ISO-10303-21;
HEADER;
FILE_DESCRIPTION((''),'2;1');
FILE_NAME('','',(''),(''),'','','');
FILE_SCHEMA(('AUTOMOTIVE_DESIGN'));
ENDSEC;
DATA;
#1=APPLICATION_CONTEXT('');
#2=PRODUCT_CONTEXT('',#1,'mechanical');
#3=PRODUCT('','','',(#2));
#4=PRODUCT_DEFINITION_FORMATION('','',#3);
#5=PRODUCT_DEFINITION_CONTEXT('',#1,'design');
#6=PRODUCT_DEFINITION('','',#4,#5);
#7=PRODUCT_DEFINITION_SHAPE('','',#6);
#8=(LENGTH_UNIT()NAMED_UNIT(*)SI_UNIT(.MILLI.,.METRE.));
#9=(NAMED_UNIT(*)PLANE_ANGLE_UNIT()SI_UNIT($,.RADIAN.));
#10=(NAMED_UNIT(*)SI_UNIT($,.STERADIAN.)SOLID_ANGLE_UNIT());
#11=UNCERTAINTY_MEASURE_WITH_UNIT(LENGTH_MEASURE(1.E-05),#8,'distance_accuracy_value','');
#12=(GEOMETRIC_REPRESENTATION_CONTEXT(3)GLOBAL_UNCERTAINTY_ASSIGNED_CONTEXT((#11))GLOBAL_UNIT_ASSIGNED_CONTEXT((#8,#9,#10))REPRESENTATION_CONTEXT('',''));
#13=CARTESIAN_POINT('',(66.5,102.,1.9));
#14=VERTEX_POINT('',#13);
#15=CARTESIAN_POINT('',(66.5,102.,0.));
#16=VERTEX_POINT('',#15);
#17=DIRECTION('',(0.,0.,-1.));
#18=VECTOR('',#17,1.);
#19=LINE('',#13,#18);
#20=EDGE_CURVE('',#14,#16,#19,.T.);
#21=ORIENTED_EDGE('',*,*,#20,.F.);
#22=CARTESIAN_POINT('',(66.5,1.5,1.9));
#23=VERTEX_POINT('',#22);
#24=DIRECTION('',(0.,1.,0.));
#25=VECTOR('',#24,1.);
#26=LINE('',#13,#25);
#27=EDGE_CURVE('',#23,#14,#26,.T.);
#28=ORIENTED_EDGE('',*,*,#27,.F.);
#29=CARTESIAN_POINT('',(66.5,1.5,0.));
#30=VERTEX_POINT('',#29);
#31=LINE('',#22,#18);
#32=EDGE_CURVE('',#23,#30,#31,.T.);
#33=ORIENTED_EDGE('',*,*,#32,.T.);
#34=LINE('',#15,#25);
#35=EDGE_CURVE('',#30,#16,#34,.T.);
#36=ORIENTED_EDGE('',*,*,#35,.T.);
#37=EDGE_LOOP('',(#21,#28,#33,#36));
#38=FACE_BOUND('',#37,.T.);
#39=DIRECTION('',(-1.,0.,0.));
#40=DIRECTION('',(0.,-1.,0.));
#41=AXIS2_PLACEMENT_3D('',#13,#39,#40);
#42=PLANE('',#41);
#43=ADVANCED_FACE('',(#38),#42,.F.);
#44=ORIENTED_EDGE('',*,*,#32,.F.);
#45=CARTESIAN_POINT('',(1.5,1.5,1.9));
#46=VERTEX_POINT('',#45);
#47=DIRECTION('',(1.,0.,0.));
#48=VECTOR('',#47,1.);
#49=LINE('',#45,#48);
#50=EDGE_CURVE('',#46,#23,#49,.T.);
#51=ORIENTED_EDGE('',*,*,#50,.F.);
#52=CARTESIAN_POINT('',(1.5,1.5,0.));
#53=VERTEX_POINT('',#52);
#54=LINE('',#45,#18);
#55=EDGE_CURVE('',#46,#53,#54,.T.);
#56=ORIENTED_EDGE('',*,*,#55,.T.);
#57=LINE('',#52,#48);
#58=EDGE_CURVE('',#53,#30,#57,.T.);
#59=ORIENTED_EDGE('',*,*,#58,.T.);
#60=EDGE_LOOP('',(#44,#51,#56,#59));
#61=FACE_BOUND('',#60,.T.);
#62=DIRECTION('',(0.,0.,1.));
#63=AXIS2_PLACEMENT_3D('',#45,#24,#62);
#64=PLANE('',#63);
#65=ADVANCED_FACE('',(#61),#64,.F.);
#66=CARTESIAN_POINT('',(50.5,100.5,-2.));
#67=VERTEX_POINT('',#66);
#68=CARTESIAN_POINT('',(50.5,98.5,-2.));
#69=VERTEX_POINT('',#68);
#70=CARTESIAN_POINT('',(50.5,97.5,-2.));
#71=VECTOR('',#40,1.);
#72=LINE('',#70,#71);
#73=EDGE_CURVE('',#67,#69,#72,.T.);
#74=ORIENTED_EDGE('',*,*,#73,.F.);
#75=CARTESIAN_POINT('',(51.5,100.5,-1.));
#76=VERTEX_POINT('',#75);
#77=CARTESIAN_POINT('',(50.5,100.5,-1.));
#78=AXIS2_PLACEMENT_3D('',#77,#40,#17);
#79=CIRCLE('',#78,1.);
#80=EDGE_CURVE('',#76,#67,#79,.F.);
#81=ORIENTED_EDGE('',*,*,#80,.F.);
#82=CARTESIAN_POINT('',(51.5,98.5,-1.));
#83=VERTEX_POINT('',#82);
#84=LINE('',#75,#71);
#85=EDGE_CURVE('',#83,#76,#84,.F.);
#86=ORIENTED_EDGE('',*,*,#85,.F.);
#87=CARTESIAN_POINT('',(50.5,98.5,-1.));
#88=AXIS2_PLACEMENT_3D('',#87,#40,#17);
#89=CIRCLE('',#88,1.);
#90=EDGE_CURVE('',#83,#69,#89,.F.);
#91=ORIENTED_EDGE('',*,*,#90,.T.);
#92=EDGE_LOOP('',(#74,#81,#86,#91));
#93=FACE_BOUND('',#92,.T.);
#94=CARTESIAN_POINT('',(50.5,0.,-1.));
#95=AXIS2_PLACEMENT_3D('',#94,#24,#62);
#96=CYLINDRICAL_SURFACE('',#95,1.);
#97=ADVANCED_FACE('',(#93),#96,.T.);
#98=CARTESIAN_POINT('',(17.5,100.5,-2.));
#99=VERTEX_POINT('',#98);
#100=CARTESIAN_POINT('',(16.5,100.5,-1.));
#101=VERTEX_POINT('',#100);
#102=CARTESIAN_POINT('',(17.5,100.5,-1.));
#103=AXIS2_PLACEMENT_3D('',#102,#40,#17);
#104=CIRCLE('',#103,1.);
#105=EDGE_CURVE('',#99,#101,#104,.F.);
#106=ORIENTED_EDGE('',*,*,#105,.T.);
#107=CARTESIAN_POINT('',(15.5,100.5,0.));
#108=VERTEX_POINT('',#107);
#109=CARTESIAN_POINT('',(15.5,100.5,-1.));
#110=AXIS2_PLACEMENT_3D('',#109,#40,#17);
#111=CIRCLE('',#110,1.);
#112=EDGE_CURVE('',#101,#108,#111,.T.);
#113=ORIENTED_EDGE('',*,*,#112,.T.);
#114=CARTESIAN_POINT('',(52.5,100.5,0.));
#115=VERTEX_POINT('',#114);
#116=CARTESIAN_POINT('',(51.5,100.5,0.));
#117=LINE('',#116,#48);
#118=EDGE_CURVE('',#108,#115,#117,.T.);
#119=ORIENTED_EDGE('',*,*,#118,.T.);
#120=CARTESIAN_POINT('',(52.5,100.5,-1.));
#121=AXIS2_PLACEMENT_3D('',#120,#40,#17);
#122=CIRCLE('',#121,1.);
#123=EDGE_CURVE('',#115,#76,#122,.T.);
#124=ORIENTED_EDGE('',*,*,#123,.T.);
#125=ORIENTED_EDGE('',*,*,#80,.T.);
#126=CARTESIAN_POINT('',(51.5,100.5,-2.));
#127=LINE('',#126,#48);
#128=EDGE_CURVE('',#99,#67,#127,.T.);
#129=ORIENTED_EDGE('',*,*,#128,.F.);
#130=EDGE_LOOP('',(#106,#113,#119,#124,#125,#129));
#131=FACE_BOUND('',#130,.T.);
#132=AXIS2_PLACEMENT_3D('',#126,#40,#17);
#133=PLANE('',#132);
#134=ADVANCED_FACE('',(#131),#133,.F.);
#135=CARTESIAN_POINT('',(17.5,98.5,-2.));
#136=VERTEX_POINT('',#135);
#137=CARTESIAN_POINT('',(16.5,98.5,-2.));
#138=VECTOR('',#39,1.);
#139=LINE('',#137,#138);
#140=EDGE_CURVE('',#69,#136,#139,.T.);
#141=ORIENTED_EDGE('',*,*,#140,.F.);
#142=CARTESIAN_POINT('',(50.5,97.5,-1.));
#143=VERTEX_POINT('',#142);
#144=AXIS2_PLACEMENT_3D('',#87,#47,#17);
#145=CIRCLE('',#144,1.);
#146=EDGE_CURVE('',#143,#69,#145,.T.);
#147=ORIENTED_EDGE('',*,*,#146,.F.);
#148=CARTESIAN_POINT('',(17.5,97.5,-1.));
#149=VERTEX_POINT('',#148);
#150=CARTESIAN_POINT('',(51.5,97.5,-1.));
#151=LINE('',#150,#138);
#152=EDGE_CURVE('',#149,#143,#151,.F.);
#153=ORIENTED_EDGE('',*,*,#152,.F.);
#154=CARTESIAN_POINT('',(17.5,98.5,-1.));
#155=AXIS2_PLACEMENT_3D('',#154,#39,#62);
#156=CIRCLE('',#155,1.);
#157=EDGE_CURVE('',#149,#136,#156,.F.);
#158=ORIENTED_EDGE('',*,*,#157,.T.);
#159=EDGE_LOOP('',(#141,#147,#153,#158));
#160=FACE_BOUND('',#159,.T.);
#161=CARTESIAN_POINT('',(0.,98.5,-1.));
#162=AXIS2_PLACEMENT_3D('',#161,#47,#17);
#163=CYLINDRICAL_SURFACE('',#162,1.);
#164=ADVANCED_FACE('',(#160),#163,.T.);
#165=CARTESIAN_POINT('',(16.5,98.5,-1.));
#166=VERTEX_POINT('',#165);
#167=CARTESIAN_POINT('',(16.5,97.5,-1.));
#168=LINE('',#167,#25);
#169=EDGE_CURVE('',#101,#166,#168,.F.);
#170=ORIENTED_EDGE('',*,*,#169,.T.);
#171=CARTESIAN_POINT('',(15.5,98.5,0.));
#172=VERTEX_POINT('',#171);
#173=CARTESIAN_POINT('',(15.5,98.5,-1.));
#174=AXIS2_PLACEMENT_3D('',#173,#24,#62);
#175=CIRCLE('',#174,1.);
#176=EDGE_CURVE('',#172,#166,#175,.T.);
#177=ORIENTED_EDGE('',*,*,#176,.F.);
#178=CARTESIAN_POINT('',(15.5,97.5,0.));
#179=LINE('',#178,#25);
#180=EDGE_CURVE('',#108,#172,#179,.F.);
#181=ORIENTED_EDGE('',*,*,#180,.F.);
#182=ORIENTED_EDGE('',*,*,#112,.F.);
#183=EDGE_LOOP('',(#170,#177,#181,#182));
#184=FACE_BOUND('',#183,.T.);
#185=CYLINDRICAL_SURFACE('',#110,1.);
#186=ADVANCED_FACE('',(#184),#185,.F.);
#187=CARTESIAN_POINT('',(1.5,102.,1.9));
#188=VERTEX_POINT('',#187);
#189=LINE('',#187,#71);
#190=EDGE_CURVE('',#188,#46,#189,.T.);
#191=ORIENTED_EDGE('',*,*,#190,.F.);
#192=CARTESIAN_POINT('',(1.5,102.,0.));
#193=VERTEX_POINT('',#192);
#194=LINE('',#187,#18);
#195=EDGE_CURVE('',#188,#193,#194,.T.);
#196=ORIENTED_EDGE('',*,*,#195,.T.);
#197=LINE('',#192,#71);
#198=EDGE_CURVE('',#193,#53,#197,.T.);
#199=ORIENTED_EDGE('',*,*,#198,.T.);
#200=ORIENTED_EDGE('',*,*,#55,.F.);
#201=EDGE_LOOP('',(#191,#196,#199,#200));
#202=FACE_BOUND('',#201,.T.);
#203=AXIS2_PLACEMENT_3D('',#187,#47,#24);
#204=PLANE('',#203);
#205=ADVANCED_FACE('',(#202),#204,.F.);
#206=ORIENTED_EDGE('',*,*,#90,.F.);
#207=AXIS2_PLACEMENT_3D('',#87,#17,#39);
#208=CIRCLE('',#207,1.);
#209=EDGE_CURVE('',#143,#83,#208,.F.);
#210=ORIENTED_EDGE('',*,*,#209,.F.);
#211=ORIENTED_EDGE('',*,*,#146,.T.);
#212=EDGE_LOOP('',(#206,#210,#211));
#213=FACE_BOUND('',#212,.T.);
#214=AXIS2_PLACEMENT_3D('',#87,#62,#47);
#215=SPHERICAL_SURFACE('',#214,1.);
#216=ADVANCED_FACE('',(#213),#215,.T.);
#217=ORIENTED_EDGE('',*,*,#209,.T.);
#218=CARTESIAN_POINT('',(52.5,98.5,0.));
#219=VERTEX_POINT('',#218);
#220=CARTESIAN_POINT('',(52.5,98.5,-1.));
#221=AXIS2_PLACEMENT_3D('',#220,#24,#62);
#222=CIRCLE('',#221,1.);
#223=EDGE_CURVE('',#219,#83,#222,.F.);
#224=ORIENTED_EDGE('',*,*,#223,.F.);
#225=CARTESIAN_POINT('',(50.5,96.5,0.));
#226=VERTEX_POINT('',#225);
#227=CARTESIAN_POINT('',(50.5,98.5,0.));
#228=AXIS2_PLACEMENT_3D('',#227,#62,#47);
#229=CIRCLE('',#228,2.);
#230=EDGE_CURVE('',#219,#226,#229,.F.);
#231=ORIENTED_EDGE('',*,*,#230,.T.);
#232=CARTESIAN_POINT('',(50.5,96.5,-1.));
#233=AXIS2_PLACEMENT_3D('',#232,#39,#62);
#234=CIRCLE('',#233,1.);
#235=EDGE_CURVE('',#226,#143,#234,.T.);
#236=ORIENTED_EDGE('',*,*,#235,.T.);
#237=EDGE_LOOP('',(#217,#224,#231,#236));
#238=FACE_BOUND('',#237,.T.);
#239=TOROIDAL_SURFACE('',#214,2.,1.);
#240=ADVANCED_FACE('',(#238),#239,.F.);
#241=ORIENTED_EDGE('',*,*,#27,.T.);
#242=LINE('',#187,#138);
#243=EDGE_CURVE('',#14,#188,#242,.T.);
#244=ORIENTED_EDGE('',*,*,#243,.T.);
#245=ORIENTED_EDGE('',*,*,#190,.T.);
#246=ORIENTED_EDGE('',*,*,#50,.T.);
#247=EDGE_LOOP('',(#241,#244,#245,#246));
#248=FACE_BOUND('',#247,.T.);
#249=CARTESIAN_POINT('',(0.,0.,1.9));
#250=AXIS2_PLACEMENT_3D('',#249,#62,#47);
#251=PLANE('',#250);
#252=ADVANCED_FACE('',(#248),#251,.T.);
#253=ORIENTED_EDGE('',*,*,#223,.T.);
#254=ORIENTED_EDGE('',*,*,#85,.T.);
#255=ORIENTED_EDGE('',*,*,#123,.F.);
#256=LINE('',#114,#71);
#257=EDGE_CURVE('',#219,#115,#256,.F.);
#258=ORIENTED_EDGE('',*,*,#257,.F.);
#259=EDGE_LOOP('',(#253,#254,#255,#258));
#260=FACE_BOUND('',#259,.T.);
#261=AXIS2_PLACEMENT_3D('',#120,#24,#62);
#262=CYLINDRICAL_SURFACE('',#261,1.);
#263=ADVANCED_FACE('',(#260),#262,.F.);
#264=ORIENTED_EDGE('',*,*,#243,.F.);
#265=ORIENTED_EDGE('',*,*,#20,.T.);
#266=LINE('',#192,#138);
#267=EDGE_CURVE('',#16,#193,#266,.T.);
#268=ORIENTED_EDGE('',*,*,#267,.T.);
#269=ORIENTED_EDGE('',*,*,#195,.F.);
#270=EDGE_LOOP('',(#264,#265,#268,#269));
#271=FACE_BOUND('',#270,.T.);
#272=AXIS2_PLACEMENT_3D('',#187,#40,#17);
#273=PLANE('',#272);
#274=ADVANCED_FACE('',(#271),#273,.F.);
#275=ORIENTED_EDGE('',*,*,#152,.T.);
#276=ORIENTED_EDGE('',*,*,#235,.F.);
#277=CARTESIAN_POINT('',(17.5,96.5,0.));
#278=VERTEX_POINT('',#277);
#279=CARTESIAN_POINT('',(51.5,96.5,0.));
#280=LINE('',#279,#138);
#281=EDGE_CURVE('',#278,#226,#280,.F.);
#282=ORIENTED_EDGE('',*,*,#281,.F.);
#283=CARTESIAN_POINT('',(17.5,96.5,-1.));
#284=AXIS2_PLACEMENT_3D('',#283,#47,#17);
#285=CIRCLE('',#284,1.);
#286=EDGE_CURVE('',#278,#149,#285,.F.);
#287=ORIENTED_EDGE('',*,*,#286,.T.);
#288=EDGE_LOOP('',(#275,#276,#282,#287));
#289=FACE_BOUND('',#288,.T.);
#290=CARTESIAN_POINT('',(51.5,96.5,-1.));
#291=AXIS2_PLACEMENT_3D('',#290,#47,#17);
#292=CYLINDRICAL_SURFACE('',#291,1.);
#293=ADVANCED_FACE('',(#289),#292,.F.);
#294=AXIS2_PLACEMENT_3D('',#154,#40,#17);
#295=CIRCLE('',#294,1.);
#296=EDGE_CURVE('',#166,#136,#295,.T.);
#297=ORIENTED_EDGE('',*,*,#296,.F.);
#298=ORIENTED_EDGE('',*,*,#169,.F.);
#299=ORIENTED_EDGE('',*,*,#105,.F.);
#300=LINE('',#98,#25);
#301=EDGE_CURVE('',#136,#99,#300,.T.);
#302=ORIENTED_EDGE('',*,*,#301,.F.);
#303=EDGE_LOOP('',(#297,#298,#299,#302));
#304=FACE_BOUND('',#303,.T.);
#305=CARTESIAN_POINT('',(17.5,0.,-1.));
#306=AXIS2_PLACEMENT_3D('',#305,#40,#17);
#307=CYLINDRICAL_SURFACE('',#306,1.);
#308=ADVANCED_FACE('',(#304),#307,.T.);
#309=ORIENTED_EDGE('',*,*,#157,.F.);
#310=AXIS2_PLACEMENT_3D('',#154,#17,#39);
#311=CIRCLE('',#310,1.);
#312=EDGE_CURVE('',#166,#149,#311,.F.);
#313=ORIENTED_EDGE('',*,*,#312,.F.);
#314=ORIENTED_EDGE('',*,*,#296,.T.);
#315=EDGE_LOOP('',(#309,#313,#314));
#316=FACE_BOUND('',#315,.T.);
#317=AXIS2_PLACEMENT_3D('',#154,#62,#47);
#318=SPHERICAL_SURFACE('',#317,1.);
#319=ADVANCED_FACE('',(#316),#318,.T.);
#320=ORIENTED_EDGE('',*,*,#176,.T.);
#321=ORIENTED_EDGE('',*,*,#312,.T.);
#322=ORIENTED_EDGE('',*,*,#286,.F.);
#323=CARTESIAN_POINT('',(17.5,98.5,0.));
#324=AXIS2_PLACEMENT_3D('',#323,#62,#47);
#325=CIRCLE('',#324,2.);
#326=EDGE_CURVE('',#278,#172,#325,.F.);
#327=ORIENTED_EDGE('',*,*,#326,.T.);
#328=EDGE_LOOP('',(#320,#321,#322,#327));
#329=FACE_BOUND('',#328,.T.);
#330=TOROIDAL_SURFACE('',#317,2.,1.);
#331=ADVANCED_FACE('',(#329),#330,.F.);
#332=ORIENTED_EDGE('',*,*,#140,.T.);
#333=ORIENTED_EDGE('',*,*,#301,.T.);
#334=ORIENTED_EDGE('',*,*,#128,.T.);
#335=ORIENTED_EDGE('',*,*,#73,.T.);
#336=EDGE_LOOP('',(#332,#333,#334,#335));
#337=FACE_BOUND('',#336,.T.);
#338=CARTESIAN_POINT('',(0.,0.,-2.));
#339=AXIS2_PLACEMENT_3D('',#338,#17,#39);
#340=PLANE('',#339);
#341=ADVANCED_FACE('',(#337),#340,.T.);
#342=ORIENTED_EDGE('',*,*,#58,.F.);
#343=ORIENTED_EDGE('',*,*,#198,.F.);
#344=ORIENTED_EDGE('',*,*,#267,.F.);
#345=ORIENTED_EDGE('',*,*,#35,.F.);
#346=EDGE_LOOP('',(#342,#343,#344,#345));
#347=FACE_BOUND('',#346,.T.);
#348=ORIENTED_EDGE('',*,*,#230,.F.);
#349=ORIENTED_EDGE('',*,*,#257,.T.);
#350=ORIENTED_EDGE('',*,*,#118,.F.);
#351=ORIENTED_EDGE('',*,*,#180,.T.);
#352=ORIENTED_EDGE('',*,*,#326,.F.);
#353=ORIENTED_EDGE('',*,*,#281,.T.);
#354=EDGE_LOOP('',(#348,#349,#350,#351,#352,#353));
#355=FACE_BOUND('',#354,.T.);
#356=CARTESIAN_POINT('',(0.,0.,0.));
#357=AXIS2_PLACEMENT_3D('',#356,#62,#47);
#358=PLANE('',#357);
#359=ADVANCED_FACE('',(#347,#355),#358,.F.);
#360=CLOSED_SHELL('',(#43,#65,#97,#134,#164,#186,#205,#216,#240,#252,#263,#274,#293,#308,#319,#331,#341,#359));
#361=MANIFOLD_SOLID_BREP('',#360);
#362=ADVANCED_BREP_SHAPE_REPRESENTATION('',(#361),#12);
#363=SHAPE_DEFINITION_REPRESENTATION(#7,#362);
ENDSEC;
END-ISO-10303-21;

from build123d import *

# Parameters (mm, degrees)
SKETCH1_W           = 65
SKETCH1_H           = 100.5
BOSS_EXTRUDE1_DEPTH = 1.9
SKETCH2_W           = 35
SKETCH2_H           = 3
BOSS_EXTRUDE2_DEPTH = 2
FILLET2_R           = 1


with BuildPart() as part:
    # Sketch1 → Boss-Extrude1 (new body)
    with BuildSketch(Plane.XY):
        with Locations((34, 51.75)):
            Rectangle(SKETCH1_W, SKETCH1_H)
    extrude(amount=BOSS_EXTRUDE1_DEPTH)

    # Sketch2 → Boss-Extrude2 (add)
    with BuildSketch(Plane(origin=(0, 0, 0), x_dir=(-1, 0, 0), z_dir=(0, 0, -1))):
        with Locations((-34, 99)):
            Rectangle(SKETCH2_W, SKETCH2_H)
    extrude(amount=BOSS_EXTRUDE2_DEPTH)

    # Fillet2
    fillet2_edges = [part.edges().sort_by_distance(p)[0] for p in [
        (51.5, 99, 0),
        (34, 97.5, 0),
        (51.5, 97.5, -1),
        (16.5, 99, 0),
        (16.5, 97.5, -1),
        (51.5, 99, -2),
        (34, 97.5, -2),
        (16.5, 99, -2),
    ]]
    fillet(fillet2_edges, radius=FILLET2_R - 0.0001)  # a hair under: the kernel refuses the full size


solid = part.part
